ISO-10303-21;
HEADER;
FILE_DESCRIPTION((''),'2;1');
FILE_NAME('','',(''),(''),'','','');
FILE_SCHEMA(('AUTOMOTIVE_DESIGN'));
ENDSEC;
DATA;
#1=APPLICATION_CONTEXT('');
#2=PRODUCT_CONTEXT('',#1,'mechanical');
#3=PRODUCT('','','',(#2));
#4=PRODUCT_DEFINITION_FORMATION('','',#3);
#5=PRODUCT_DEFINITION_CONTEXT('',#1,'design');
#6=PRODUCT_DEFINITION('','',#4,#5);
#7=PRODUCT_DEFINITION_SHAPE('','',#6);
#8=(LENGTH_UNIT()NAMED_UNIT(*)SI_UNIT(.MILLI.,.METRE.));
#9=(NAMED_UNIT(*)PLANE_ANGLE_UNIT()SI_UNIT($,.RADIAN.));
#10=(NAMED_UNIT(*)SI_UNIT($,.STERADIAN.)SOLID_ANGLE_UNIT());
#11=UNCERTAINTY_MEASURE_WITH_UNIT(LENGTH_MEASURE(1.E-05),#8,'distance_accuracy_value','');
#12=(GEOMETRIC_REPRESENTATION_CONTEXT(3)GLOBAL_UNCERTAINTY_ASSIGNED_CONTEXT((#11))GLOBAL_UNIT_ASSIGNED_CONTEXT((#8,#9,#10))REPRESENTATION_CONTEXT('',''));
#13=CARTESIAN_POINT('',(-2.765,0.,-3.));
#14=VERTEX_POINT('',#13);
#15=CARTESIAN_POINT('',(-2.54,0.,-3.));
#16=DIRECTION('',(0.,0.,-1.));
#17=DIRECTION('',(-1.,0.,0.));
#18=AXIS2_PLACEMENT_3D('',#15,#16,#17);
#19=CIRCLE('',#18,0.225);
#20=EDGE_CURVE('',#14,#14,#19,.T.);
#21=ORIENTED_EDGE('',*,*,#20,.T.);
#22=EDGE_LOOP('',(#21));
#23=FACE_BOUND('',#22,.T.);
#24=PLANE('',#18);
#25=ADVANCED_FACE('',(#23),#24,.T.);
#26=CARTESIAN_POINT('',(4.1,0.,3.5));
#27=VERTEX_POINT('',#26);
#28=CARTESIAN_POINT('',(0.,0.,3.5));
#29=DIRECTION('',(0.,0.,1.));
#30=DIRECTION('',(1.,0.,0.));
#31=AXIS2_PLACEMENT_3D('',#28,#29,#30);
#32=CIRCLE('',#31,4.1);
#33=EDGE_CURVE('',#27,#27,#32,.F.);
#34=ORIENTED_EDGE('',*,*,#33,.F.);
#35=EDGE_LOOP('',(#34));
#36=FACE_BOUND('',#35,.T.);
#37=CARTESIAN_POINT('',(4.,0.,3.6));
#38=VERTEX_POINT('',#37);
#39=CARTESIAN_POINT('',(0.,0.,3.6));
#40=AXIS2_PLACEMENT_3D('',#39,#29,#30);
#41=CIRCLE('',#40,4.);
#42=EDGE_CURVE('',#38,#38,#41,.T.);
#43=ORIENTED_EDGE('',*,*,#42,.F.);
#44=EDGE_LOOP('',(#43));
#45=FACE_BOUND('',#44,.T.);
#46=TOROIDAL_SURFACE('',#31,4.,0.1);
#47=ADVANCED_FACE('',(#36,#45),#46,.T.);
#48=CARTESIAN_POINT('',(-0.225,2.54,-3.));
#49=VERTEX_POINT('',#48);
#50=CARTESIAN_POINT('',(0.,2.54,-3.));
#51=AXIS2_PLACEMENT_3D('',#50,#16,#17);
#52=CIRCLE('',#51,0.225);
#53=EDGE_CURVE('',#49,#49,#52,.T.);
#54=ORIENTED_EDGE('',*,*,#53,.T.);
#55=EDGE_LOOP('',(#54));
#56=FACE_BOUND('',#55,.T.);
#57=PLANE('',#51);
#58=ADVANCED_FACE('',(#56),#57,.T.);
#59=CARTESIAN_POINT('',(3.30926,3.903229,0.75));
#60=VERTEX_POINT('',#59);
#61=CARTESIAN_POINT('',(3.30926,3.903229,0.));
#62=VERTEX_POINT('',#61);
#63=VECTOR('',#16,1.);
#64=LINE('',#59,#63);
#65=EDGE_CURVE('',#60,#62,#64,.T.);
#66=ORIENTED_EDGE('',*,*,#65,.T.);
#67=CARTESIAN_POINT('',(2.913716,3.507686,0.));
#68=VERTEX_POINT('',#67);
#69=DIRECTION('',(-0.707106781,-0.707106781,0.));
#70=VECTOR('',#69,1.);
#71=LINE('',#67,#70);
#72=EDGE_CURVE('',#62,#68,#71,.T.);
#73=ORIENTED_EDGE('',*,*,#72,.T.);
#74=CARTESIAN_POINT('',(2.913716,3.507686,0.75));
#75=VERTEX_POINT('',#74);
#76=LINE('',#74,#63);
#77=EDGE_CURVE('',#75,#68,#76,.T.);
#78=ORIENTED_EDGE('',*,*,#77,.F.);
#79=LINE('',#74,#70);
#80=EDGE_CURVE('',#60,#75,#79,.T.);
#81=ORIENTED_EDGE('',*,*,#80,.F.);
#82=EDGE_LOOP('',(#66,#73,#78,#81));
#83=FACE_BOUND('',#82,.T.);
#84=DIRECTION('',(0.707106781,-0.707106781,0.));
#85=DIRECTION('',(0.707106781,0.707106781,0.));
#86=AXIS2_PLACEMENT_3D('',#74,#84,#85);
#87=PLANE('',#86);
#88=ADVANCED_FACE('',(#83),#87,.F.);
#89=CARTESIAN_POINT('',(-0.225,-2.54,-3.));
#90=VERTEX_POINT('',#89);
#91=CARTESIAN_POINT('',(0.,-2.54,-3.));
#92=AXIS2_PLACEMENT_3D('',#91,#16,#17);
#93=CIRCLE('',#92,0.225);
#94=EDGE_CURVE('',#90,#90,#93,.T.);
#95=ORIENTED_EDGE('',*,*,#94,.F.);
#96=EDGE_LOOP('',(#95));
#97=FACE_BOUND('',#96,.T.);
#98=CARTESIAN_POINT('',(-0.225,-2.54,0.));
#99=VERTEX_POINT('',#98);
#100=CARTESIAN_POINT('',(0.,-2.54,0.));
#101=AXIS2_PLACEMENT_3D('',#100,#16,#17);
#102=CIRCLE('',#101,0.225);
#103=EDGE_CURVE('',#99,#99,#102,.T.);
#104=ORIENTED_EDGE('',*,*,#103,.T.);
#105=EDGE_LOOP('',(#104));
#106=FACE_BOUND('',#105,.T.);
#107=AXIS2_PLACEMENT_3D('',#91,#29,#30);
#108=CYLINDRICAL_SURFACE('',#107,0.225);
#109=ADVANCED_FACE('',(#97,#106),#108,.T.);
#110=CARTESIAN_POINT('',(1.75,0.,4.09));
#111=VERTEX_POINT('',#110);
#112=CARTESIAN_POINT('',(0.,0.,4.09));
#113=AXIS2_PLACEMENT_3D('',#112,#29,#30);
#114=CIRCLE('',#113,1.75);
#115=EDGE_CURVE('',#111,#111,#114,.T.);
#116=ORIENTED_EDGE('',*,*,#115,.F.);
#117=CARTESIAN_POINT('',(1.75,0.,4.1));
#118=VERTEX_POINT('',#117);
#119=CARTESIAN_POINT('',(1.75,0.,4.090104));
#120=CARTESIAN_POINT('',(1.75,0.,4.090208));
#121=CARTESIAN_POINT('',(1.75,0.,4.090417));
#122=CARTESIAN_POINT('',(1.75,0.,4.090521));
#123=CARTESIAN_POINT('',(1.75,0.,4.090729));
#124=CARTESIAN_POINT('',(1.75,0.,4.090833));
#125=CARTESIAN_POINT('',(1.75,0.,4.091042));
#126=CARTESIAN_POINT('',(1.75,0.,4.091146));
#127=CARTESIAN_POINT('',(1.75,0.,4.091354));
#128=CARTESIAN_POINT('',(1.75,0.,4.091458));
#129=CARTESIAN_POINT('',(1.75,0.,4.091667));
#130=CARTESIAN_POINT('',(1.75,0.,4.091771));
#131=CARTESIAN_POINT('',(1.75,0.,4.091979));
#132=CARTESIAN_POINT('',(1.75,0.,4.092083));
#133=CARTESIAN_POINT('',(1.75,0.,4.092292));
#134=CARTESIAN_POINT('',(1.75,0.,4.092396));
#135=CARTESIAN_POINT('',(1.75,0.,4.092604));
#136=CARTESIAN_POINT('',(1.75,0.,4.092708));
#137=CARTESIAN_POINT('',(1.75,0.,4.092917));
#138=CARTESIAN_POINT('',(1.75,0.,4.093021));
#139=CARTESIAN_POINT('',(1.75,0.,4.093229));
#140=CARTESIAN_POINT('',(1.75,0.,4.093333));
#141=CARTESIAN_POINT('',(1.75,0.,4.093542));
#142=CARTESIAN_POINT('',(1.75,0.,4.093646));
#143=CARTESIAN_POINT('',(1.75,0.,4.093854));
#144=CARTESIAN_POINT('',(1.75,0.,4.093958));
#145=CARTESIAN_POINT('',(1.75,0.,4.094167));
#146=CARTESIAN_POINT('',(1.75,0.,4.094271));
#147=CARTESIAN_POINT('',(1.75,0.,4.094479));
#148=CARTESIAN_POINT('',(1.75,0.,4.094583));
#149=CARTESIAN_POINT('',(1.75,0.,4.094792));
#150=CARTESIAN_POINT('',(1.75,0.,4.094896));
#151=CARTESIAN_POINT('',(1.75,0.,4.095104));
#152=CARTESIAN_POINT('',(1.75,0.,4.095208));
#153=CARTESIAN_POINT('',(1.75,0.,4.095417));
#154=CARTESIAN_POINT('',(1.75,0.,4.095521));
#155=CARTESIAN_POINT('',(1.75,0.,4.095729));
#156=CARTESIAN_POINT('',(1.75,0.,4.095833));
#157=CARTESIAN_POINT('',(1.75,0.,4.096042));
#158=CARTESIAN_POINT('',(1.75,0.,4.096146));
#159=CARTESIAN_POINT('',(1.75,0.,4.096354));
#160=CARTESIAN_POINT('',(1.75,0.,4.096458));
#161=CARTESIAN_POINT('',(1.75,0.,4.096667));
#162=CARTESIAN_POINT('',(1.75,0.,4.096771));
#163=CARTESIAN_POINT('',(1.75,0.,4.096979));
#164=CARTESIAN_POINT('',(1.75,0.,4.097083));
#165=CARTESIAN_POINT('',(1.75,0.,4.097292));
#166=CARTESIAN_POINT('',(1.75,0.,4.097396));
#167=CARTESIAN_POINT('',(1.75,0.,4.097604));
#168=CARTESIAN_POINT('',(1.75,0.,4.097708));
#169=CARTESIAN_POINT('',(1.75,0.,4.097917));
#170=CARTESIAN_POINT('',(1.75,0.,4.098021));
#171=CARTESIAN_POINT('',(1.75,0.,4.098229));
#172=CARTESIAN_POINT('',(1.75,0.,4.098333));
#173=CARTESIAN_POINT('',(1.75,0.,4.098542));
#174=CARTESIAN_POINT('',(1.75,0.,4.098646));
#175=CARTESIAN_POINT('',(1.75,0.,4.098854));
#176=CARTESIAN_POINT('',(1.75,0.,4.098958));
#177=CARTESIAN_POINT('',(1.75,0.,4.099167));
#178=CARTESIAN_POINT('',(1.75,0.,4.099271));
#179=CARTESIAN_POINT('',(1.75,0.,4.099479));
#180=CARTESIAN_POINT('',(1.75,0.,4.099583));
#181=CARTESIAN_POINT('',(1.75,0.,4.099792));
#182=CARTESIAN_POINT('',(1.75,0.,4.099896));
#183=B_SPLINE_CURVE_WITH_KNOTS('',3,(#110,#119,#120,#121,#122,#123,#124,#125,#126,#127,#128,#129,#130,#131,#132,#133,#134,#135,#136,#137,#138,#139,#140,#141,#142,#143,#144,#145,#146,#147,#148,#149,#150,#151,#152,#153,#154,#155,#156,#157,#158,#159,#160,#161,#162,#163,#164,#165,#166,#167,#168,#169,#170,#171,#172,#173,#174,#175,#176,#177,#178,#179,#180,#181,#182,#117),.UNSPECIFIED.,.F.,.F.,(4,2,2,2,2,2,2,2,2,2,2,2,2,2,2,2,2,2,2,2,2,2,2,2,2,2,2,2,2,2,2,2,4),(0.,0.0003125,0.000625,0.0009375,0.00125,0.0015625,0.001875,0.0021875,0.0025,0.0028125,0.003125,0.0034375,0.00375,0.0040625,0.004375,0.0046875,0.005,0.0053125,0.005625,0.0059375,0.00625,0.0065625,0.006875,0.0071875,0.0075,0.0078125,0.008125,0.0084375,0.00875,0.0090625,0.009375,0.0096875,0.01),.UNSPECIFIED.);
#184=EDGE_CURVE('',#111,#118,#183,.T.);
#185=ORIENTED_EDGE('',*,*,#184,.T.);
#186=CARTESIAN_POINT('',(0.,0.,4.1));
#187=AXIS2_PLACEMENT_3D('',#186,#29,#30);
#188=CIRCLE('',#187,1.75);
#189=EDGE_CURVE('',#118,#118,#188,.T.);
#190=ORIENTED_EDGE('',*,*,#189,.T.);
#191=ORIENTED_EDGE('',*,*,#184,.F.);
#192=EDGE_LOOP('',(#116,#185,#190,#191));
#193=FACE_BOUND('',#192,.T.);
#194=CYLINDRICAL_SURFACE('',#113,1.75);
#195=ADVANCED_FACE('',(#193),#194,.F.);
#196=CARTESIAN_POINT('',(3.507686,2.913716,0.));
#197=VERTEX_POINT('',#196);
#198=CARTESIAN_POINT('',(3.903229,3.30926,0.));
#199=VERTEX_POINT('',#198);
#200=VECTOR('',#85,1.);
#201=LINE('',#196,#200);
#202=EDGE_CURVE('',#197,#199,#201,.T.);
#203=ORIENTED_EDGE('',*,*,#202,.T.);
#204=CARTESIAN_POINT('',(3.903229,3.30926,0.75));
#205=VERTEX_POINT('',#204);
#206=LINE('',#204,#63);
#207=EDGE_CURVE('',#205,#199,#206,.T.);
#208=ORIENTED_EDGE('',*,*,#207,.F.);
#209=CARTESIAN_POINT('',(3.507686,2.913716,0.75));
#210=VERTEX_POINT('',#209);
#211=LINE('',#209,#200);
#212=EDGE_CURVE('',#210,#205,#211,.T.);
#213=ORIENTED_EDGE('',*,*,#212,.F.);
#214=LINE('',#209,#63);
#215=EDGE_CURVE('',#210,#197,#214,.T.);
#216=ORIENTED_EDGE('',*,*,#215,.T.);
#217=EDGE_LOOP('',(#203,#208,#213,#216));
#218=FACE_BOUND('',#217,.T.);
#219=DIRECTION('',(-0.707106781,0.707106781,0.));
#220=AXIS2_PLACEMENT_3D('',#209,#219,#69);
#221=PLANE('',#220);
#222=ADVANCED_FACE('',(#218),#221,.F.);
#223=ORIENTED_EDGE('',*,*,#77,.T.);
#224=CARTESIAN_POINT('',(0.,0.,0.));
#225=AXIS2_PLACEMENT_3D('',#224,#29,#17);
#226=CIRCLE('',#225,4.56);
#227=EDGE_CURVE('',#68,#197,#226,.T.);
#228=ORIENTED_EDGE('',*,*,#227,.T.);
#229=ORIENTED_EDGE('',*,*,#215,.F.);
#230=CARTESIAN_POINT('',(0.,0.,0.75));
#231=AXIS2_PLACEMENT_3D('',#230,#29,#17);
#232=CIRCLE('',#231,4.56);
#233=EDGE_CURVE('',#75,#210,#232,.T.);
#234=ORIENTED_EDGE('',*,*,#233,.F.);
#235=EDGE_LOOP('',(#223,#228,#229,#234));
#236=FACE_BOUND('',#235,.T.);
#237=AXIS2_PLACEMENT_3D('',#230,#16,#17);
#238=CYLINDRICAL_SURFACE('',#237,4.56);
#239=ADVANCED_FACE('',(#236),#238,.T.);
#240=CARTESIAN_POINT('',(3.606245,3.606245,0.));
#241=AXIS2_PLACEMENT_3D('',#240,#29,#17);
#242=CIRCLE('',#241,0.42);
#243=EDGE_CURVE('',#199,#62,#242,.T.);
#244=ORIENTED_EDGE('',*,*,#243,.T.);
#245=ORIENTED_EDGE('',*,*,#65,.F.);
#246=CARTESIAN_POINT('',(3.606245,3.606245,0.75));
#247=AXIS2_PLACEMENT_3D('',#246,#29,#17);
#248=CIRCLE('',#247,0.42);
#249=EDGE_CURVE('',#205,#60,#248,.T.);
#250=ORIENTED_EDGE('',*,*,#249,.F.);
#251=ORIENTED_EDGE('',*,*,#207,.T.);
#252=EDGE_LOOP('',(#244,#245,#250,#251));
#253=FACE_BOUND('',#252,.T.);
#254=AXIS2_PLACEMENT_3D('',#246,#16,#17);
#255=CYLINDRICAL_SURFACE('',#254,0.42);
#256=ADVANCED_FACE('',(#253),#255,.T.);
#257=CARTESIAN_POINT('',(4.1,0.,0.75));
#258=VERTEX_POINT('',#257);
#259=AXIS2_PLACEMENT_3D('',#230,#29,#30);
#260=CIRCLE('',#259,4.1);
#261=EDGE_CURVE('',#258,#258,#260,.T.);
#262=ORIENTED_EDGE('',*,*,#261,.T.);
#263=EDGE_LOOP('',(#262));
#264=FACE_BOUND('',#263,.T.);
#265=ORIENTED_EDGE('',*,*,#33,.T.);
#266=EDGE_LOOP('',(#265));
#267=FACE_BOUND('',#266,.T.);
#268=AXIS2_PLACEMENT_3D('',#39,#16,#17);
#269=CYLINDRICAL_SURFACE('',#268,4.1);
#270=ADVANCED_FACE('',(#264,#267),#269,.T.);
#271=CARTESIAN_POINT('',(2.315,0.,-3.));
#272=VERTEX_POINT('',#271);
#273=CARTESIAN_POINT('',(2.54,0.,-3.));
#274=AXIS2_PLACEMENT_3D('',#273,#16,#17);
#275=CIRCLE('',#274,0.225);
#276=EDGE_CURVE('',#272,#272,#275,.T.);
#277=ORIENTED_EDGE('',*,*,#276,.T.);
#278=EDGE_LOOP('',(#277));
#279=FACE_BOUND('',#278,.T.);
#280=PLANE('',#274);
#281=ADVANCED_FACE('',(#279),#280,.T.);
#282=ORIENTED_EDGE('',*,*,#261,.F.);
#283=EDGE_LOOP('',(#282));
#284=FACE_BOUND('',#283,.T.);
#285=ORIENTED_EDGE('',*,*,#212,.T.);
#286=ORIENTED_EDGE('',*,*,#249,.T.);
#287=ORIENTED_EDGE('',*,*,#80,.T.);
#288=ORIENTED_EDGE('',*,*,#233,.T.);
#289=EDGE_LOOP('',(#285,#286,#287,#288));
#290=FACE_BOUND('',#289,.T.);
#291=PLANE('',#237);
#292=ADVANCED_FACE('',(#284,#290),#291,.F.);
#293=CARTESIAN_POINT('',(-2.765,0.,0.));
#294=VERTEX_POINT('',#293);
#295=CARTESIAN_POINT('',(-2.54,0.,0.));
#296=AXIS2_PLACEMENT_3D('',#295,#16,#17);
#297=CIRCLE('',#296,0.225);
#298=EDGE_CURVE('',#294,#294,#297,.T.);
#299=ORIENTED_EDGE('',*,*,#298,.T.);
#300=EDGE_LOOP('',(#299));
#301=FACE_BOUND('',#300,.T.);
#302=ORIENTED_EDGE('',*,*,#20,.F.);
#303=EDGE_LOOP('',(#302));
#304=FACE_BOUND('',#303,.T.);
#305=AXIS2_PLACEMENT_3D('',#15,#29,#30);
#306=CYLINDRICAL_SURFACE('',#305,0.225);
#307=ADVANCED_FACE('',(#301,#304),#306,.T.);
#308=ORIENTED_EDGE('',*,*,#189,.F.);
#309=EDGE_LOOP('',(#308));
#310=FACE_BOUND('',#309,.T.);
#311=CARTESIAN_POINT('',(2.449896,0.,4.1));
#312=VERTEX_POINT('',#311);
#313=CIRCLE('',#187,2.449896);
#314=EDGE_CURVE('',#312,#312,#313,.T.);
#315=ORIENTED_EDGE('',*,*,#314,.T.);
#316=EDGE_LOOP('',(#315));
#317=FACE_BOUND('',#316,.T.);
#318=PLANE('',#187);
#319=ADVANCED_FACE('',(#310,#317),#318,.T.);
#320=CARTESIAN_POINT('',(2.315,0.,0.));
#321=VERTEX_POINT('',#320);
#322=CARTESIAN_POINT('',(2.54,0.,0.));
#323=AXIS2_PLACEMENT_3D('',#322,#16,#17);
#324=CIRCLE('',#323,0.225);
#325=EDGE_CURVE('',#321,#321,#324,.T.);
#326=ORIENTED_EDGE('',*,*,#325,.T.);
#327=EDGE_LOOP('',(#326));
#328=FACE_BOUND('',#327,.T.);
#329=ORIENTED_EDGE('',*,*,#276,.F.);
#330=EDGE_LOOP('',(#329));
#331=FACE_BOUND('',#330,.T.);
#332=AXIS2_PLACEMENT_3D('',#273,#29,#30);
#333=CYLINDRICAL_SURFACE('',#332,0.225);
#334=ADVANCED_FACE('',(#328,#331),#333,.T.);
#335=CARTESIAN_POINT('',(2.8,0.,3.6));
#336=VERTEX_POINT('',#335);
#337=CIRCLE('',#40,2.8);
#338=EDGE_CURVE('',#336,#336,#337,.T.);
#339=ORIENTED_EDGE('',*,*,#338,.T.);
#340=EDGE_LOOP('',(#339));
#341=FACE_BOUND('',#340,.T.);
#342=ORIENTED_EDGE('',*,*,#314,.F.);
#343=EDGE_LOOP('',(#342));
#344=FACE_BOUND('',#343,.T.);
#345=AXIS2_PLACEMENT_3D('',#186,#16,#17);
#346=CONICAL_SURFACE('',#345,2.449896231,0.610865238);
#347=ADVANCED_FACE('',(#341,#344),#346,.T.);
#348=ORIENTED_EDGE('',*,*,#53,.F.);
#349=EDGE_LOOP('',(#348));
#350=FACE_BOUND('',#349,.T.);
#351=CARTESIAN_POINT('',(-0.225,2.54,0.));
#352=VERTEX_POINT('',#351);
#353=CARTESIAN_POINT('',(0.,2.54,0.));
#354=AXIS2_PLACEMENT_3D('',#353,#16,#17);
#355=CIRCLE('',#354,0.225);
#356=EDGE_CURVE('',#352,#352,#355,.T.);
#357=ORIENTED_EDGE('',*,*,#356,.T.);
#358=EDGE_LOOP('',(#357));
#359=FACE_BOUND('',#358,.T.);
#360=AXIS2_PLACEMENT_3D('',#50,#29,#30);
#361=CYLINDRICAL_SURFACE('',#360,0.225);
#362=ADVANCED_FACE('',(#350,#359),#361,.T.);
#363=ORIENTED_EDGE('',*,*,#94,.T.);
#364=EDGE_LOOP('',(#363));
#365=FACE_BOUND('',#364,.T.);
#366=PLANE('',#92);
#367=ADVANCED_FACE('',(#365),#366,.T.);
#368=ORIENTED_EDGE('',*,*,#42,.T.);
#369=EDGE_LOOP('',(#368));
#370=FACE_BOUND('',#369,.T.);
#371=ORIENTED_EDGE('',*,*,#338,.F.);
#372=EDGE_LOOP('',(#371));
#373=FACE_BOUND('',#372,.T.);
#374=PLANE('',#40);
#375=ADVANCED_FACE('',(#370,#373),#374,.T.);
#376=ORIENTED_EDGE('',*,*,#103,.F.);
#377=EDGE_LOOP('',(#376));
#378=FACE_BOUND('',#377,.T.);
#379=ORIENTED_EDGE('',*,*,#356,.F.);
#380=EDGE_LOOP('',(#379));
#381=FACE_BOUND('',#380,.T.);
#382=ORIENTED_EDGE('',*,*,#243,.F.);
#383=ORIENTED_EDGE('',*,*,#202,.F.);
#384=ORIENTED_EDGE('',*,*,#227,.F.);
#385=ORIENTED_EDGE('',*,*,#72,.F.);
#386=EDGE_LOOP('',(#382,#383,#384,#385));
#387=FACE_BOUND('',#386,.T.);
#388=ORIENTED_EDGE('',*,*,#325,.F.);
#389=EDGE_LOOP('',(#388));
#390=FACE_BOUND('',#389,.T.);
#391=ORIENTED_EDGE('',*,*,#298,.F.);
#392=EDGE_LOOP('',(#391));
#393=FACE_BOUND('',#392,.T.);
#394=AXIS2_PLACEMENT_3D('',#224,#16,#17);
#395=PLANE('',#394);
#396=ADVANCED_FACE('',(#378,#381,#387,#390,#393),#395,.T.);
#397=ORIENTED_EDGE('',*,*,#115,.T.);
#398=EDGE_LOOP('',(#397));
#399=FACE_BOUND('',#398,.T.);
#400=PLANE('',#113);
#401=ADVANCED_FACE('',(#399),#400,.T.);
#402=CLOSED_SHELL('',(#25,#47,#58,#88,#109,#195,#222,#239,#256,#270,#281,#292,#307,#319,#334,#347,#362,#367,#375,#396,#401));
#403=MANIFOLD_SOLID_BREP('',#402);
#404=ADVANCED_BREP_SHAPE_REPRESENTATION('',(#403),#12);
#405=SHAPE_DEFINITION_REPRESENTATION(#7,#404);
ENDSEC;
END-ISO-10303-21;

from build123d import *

# Parameters (mm, degrees)
EXTRUDE_1_DEPTH     = 0.75
SKETCH_2_R          = 4.1
EXTRUDE_2_DEPTH     = 2.85
SKETCH_3_R          = 2.8
EXTRUDE_3_DEPTH     = 0.5
SKETCH_4_R          = 1.75
CUT_EXTRUDE_1_DEPTH = 0.01
FILLET_1_R          = 0.1
CHAMFER_1_SIZE2     = 0.350103769
CHAMFER_1_SIZE      = 0.5
SKETCH_5_R          = 0.225
EXTRUDE_4_DEPTH     = 3


with BuildPart() as part:
    # Эскиз1 → Бобышка-Вытянуть1 (new body)
    with BuildSketch(Plane.XY):
        with BuildLine():
            Line((2.91371601, 3.507685706), (3.309259736, 3.903229432))
            ThreePointArc((3.309259736, 3.903229432), (3.903229432, 3.903229432), (3.903229432, 3.309259736))
            Line((3.903229432, 3.309259736), (3.507685706, 2.91371601))
            ThreePointArc((3.507685706, 2.91371601), (-3.224406922, -3.224406922), (2.91371601, 3.507685706))
        make_face()
    extrude(amount=EXTRUDE_1_DEPTH)

    # Эскиз2 → Бобышка-Вытянуть2 (add)
    with BuildSketch(Plane.XY.offset(0.75)):
        Circle(SKETCH_2_R)
    extrude(amount=EXTRUDE_2_DEPTH)

    # Эскиз3 → Бобышка-Вытянуть3 (add)
    with BuildSketch(Plane.XY.offset(3.6)):
        Circle(SKETCH_3_R)
    extrude(amount=EXTRUDE_3_DEPTH)

    # Эскиз4 → Вырез-Вытянуть1 (cut)
    with BuildSketch(Plane.XY.offset(4.1)):
        Circle(SKETCH_4_R)
    extrude(amount=-CUT_EXTRUDE_1_DEPTH, mode=Mode.SUBTRACT)

    # Скругление1
    fillet_1_edges = [part.edges().sort_by_distance(p)[0] for p in [
        (-4.1, 0, 3.6),
    ]]
    fillet(fillet_1_edges, radius=FILLET_1_R)

    # Фаска1
    chamfer_1_edges = [part.edges().sort_by_distance(p)[0] for p in [
        (-2.8, 0, 4.1),
    ]]
    chamfer_1_side = [part.faces().sort_by_distance(p)[0] for p in [
        (-2.8, 0, 4.092997925),
    ]]
    chamfer(chamfer_1_edges, length=CHAMFER_1_SIZE - 0.0001, length2=CHAMFER_1_SIZE2 - 0.0001, reference=chamfer_1_side[0])  # a hair under: the kernel refuses the full size

    # Эскиз5 → Бобышка-Вытянуть4 (add)
    with BuildSketch(Plane(origin=(0, 0, 0), x_dir=(-1, 0, 0), z_dir=(0, 0, -1))):
        with Locations((-2.54, 0)):
            Circle(SKETCH_5_R)
        with Locations((0, -2.54)):
            Circle(SKETCH_5_R)
        with Locations((2.54, 0)):
            Circle(SKETCH_5_R)
        with Locations((0, 2.54)):
            Circle(SKETCH_5_R)
    extrude(amount=EXTRUDE_4_DEPTH)


solid = part.part
